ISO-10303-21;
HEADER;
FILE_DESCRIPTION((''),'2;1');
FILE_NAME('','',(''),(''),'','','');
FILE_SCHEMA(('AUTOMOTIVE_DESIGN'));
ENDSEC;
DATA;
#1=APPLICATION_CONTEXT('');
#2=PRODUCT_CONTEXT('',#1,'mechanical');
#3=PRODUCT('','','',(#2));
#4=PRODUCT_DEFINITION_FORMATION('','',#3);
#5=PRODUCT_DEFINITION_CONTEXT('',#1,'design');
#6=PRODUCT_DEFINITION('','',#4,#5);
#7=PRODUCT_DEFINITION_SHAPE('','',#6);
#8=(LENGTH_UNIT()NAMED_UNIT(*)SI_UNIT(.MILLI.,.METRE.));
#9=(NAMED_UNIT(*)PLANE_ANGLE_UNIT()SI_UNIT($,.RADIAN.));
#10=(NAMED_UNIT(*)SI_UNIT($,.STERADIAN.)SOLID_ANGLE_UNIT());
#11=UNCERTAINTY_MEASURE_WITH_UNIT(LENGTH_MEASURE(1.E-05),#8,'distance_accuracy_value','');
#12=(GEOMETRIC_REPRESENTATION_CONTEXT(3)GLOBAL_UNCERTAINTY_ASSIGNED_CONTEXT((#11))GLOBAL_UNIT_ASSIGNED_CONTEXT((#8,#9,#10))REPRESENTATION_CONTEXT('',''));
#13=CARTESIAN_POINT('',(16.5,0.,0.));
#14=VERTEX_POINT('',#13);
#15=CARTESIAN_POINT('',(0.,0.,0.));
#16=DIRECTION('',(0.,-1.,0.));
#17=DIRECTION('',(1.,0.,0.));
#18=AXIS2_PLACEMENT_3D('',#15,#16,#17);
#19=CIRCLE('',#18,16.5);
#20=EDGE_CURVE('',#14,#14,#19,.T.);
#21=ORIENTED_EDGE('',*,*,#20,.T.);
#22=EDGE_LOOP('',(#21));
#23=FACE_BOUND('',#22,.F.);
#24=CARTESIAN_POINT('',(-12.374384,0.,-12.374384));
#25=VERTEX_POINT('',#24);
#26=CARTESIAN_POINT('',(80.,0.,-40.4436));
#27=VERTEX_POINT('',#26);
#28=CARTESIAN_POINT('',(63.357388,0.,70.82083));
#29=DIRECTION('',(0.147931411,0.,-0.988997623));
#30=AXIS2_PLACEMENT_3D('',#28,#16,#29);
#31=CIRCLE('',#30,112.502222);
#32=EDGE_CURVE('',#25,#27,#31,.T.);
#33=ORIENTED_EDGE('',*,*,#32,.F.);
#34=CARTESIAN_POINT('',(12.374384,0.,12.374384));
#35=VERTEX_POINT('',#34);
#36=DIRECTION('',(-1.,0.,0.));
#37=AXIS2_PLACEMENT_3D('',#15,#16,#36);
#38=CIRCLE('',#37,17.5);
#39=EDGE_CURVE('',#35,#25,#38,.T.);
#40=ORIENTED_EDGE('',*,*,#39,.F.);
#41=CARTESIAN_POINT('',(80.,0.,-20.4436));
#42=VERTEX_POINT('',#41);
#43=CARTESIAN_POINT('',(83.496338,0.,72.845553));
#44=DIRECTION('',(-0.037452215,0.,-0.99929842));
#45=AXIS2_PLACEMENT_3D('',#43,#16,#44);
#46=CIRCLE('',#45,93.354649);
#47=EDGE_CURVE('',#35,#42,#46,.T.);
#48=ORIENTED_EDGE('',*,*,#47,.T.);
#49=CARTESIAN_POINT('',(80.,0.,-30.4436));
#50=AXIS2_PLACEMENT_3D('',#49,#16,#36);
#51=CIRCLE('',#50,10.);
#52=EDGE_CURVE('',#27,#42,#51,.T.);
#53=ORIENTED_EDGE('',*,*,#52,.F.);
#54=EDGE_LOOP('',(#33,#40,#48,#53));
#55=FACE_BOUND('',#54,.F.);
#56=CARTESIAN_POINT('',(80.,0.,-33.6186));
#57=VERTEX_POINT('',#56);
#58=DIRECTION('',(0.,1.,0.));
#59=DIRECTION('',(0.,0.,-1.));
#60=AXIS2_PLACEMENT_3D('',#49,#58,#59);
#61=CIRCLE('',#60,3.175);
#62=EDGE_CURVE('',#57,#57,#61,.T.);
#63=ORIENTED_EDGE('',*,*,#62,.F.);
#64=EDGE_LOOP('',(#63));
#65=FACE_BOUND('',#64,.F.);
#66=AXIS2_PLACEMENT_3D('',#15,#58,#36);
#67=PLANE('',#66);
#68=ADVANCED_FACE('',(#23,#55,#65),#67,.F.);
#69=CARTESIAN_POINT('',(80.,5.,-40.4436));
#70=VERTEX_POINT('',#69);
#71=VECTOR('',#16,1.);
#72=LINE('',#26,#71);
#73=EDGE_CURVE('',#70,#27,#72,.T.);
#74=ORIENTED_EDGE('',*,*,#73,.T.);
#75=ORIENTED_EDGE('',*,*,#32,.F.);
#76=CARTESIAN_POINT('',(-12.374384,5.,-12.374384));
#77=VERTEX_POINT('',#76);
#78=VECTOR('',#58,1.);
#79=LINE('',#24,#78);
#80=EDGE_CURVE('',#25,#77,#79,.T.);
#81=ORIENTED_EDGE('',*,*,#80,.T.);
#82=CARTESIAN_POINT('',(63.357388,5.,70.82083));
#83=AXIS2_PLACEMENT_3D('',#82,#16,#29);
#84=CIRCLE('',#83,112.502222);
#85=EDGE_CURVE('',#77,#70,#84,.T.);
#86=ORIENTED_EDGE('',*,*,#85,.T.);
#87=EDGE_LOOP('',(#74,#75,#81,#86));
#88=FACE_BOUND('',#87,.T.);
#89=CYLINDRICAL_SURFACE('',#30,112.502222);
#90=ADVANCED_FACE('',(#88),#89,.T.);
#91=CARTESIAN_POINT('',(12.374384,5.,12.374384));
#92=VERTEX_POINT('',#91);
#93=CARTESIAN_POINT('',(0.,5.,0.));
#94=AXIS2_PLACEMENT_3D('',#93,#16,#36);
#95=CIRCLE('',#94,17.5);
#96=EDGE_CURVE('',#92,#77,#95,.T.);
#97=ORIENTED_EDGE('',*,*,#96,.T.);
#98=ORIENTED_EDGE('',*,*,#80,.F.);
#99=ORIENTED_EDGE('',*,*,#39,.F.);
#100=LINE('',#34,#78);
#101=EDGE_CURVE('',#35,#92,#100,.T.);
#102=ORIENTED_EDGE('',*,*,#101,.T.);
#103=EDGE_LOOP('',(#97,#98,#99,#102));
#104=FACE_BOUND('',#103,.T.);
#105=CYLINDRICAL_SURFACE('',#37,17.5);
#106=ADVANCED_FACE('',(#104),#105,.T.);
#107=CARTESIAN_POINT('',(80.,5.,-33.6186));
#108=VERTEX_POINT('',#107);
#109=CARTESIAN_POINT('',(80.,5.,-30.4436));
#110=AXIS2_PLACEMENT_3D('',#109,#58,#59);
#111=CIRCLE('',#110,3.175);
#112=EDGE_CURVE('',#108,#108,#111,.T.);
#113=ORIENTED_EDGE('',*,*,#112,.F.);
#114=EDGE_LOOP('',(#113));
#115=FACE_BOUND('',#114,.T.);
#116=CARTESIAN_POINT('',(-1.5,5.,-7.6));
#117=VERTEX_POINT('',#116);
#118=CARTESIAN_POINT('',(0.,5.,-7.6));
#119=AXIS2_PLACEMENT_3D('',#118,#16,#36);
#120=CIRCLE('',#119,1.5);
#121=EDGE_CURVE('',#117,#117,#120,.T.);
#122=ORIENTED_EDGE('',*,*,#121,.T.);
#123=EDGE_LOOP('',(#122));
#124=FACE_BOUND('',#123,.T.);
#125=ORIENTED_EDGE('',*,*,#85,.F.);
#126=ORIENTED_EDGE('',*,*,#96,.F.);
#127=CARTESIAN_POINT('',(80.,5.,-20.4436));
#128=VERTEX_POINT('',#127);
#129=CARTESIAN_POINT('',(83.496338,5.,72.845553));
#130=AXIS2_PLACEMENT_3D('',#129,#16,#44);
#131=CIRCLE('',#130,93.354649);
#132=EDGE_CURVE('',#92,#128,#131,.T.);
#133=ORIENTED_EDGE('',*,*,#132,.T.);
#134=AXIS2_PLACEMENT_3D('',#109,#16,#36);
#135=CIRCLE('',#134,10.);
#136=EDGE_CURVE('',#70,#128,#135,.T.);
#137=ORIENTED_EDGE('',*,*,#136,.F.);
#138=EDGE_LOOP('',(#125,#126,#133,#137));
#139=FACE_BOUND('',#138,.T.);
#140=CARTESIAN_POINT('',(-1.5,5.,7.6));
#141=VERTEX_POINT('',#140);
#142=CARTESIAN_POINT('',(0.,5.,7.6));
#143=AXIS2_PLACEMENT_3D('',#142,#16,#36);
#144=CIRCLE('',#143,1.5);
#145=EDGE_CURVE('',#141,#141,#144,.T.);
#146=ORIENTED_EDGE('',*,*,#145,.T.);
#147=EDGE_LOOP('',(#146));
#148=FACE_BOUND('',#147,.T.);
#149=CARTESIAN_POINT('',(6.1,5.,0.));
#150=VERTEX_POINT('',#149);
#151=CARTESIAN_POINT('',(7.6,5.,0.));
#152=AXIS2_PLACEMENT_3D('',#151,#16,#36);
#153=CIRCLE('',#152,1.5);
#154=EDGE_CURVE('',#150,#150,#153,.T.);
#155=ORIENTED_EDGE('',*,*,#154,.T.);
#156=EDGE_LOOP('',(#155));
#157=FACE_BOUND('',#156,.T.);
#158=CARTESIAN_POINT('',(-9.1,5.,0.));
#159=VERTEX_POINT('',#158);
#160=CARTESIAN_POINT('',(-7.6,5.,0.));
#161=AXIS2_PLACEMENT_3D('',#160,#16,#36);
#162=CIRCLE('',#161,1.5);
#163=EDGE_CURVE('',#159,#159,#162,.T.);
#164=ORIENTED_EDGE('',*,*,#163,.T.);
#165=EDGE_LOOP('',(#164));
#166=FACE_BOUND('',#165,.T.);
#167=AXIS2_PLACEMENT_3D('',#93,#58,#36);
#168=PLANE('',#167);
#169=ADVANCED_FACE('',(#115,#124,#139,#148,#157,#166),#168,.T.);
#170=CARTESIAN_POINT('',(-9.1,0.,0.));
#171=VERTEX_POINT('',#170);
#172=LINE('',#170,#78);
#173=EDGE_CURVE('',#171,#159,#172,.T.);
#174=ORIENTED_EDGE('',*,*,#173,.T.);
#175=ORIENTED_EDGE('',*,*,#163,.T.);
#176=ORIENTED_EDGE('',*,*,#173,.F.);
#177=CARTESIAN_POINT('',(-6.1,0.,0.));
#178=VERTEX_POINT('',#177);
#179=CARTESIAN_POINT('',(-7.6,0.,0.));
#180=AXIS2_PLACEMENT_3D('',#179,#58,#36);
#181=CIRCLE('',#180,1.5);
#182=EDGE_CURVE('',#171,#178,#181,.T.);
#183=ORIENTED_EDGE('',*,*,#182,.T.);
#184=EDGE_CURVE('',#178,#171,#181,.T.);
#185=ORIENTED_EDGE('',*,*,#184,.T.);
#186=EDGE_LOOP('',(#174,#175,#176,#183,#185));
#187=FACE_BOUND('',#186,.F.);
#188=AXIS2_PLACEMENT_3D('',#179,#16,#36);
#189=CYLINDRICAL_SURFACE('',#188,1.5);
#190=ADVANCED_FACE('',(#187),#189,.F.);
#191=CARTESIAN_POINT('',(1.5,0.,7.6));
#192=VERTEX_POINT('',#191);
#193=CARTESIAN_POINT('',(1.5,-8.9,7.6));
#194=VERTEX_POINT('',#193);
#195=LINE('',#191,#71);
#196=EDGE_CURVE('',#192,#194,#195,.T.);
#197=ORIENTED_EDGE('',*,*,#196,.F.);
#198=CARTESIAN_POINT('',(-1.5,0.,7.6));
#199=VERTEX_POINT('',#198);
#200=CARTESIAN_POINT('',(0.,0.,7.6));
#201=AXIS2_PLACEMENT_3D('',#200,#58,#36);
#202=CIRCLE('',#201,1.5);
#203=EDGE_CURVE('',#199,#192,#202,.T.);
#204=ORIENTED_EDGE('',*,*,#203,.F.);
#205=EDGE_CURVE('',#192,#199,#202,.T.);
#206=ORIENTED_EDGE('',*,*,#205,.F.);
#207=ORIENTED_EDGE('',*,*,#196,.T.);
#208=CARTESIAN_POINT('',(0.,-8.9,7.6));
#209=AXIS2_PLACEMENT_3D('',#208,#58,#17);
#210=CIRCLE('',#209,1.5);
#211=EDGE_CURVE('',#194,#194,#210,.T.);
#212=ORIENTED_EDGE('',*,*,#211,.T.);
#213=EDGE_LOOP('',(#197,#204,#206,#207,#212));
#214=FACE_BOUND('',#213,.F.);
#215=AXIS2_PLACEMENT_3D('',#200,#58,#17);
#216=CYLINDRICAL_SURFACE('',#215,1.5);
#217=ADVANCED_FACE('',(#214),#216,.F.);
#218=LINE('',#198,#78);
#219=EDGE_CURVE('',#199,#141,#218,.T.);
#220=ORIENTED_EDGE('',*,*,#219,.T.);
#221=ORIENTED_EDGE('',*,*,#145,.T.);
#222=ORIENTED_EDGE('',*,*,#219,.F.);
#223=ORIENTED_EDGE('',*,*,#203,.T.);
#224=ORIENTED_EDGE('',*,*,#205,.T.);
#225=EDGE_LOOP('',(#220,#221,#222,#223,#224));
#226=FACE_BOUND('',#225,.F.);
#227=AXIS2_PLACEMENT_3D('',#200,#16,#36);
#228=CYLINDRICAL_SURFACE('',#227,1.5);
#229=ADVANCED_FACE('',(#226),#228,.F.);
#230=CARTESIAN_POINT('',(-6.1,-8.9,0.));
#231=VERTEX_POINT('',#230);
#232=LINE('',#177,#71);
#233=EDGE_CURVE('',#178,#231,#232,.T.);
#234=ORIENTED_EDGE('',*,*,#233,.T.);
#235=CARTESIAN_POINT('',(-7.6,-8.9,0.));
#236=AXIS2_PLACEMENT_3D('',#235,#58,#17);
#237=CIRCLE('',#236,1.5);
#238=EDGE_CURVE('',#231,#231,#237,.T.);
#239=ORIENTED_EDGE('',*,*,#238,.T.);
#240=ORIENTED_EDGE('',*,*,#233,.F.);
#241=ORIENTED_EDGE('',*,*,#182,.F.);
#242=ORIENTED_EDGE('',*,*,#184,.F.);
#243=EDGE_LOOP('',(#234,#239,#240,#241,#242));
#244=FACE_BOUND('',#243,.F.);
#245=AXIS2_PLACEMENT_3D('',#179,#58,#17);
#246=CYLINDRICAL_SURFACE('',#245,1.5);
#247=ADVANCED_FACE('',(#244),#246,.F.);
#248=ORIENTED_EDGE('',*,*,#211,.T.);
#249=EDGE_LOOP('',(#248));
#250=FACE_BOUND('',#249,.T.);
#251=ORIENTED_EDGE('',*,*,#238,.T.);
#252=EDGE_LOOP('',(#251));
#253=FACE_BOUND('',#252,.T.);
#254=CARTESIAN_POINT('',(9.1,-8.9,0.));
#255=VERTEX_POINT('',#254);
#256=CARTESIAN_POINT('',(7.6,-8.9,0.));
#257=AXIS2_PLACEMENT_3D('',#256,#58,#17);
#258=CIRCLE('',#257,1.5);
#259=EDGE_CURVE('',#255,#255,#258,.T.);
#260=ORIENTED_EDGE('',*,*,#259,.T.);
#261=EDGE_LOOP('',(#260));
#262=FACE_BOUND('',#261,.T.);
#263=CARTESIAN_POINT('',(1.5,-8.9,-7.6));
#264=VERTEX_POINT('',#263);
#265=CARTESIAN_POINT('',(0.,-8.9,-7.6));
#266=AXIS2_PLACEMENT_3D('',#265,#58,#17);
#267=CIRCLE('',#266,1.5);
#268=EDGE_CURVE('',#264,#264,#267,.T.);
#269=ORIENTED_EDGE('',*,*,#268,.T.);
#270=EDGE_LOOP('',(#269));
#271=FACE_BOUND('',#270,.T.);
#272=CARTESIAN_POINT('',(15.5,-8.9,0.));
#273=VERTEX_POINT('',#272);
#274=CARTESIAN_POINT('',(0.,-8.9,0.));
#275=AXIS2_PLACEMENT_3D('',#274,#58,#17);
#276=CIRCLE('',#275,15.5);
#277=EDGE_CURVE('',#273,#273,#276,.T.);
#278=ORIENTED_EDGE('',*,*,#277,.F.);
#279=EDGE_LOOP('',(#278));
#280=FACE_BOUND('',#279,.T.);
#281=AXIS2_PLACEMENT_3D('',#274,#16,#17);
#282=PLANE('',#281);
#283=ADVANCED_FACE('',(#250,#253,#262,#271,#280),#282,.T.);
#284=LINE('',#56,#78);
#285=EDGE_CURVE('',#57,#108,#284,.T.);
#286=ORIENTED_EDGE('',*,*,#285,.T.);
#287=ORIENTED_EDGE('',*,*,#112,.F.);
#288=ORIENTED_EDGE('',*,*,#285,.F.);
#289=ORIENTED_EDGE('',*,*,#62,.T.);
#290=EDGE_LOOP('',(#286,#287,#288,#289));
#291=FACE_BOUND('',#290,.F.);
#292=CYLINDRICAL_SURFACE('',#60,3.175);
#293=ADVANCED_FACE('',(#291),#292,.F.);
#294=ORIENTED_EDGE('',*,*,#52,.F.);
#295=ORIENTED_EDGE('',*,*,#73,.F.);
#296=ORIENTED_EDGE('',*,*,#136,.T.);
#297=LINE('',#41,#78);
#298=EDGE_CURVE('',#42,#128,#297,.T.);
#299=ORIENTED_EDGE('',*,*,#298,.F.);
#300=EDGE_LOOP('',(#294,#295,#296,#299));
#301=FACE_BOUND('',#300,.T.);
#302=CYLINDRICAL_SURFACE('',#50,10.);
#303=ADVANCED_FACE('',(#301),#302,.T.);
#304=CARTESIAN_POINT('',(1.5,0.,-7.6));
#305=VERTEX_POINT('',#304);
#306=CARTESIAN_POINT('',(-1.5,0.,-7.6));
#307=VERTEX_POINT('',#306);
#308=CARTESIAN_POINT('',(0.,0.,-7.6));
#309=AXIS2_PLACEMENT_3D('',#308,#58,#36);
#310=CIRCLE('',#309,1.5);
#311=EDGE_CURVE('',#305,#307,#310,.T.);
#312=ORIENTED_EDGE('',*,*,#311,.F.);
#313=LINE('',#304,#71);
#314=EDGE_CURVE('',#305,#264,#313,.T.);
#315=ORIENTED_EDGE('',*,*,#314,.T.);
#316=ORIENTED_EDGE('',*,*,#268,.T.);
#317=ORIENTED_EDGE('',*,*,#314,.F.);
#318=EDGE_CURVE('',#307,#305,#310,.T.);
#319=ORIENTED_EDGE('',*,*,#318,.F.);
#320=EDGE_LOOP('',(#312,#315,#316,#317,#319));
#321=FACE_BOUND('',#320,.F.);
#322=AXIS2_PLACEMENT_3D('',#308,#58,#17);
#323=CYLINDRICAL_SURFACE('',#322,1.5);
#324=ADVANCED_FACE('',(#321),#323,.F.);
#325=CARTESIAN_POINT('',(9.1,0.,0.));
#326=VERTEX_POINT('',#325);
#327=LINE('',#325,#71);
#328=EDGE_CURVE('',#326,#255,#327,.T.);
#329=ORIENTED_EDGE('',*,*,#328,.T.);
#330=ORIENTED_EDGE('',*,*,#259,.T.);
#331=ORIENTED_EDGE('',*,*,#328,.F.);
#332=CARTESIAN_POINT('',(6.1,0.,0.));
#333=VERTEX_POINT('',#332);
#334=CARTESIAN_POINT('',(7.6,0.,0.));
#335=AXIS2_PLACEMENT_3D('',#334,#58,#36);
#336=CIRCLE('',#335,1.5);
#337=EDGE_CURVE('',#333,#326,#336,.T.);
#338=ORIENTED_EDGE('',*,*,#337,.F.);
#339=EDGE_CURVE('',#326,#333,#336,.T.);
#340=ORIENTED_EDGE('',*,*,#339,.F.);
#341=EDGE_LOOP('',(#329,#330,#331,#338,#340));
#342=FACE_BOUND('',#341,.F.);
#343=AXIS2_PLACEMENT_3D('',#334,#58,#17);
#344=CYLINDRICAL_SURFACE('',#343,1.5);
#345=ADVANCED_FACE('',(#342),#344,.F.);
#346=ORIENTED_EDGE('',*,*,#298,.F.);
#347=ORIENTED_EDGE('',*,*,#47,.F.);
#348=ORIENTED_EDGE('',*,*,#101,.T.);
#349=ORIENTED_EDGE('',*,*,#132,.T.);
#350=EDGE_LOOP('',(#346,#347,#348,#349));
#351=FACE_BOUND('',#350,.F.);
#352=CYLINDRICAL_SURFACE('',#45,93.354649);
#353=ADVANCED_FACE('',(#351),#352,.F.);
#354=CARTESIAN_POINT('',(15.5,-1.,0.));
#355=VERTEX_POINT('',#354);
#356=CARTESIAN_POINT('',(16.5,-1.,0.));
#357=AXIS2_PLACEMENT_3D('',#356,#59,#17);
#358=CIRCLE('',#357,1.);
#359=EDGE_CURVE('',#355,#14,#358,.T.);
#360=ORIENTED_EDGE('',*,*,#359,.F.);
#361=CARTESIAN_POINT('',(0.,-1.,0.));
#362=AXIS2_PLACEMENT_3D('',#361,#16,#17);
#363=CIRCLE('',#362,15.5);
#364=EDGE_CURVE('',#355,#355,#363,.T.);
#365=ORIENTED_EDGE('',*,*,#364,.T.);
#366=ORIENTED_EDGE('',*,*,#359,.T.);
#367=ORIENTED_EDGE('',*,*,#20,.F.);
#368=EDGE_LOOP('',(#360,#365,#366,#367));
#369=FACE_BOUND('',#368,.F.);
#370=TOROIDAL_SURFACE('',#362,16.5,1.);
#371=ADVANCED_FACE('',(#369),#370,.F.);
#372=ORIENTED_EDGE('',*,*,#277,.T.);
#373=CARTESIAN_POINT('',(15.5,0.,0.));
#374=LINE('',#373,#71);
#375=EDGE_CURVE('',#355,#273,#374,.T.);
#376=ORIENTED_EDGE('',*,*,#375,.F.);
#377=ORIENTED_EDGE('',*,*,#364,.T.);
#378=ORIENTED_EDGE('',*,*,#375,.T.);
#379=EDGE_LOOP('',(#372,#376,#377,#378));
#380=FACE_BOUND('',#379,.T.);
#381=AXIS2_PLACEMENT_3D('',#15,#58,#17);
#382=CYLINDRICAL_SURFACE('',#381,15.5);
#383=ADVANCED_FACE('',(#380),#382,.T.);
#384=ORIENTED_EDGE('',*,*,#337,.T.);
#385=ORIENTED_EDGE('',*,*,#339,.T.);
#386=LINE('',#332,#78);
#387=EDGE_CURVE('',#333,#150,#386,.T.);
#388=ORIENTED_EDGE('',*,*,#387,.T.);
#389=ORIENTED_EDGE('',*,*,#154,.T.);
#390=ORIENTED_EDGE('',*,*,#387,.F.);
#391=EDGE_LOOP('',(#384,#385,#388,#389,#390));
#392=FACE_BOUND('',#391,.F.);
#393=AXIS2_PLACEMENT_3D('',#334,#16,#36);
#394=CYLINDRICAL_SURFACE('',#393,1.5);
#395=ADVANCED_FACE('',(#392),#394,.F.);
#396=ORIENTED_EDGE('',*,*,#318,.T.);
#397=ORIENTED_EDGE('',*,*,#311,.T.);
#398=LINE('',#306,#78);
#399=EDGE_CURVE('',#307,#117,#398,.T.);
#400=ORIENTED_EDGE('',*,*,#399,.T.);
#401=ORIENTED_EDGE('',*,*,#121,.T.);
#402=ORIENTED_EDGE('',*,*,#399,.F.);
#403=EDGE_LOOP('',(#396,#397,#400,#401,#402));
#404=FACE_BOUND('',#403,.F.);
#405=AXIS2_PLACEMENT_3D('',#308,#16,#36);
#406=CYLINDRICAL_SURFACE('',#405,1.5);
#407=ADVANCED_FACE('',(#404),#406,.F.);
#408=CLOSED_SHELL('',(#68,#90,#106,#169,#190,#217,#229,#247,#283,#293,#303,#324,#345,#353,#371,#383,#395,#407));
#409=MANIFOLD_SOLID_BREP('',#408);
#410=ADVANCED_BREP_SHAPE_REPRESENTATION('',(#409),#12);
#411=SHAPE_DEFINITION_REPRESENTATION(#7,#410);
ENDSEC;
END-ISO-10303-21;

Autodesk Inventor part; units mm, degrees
ref_plane "YZ Plane" through (0, 0, 0) normal (1, 0, 0) x (0, 1, 0)
ref_plane "XZ Plane" through (0, 0, 0) normal (0, 1, 0) x (-1, 0, 0)
ref_plane "XY Plane" through (0, 0, 0) normal (0, 0, 1) x (1, 0, 0)
sketch "Cara" plane through (0, 0, 0) normal (0, 0, 1) x (1, 0, 0)
  line L0 (-22.1935, -24.9393) -> (-15.1747, -17.9205)
  arc A0 (-12.474, -17.8034) -> (-15.1747, -17.9205) centre (-13.7605, -19.3347) ccw
  arc A1 (-12.474, -17.8034) -> (-6.107, -21.4794) centre (1.0981, -1.6477) ccw
  arc A2 (-4.8581, -23.8768) -> (-6.107, -21.4794) centre (-6.79, -23.3592) ccw
  line L1 (-4.8581, -23.8768) -> (-7.4272, -33.4646)
  arc A3 (-9.9928, -34.8439) -> (-7.4272, -33.4646) centre (-9.359, -32.947) ccw
  arc A4 (-22.1052, -27.8509) -> (-9.9928, -34.8439) centre (1.0981, -1.6477) ccw
  arc A5 (-22.1935, -24.9393) -> (-22.1052, -27.8509) centre (-20.7793, -26.3535) ccw
  line L2 (9.6235, -33.4646) -> (7.0544, -23.8768)
  arc A6 (8.3033, -21.4794) -> (7.0544, -23.8768) centre (8.9863, -23.3592) ccw
  arc A7 (8.3033, -21.4794) -> (14.6703, -17.8034) centre (1.0981, -1.6477) ccw
  arc A8 (17.371, -17.9205) -> (14.6703, -17.8034) centre (15.9568, -19.3347) ccw
  line L3 (17.371, -17.9205) -> (24.3898, -24.9393)
  arc A9 (24.3015, -27.8509) -> (24.3898, -24.9393) centre (22.9756, -26.3535) ccw
  arc A10 (12.1891, -34.8439) -> (24.3015, -27.8509) centre (1.0981, -1.6477) ccw
  arc A11 (9.6235, -33.4646) -> (12.1891, -34.8439) centre (11.5553, -32.947) ccw
  line L4 (32.9151, -10.173) -> (23.3272, -7.604)
  arc A12 (21.8755, -5.3237) -> (23.3272, -7.604) centre (23.8449, -5.6721) ccw
  arc A13 (21.8755, -5.3237) -> (21.8755, 2.0283) centre (1.0981, -1.6477) ccw
  arc A14 (23.3272, 4.3086) -> (21.8755, 2.0283) centre (23.8449, 2.3767) ccw
  line L5 (23.3272, 4.3086) -> (32.9151, 6.8776)
  arc A15 (35.3924, 5.3454) -> (32.9151, 6.8776) centre (33.4327, 4.9458) ccw
  arc A16 (35.3924, -8.6408) -> (35.3924, 5.3454) centre (1.0981, -1.6477) ccw
  arc A17 (32.9151, -10.173) -> (35.3924, -8.6408) centre (33.4327, -8.2412) ccw
  line L6 (24.3898, 21.6439) -> (17.371, 14.6251)
  arc A18 (14.6703, 14.508) -> (17.371, 14.6251) centre (15.9568, 16.0394) ccw
  arc A19 (14.6703, 14.508) -> (8.3033, 18.184) centre (1.0981, -1.6477) ccw
  arc A20 (7.0544, 20.5814) -> (8.3033, 18.184) centre (8.9863, 20.0638) ccw
  line L7 (7.0544, 20.5814) -> (9.6235, 30.1693)
  arc A21 (12.1891, 31.5486) -> (9.6235, 30.1693) centre (11.5553, 29.6516) ccw
  arc A22 (24.3015, 24.5555) -> (12.1891, 31.5486) centre (1.0981, -1.6477) ccw
  arc A23 (24.3898, 21.6439) -> (24.3015, 24.5555) centre (22.9756, 23.0582) ccw
  line L8 (-7.4272, 30.1693) -> (-4.8581, 20.5814)
  arc A24 (-6.107, 18.184) -> (-4.8581, 20.5814) centre (-6.79, 20.0638) ccw
  arc A25 (-6.107, 18.184) -> (-12.474, 14.508) centre (1.0981, -1.6477) ccw
  arc A26 (-15.1747, 14.6251) -> (-12.474, 14.508) centre (-13.7605, 16.0394) ccw
  line L9 (-15.1747, 14.6251) -> (-22.1935, 21.6439)
  arc A27 (-22.1052, 24.5555) -> (-22.1935, 21.6439) centre (-20.7793, 23.0582) ccw
  arc A28 (-9.9928, 31.5486) -> (-22.1052, 24.5555) centre (1.0981, -1.6477) ccw
  arc A29 (-7.4272, 30.1693) -> (-9.9928, 31.5486) centre (-9.359, 29.6516) ccw
  line L10 (-30.7188, 6.8776) -> (-21.131, 4.3086)
  arc A30 (-19.6792, 2.0283) -> (-21.131, 4.3086) centre (-21.6486, 2.3767) ccw
  arc A31 (-19.6792, 2.0283) -> (-19.6792, -5.3237) centre (1.0981, -1.6477) ccw
  arc A32 (-21.131, -7.604) -> (-19.6792, -5.3237) centre (-21.6486, -5.6721) ccw
  line L11 (-21.131, -7.604) -> (-30.7188, -10.173)
  arc A33 (-33.1961, -8.6408) -> (-30.7188, -10.173) centre (-31.2365, -8.2412) ccw
  arc A34 (-33.1961, 5.3454) -> (-33.1961, -8.6408) centre (1.0981, -1.6477) ccw
  arc A35 (-30.7188, 6.8776) -> (-33.1961, 5.3454) centre (-31.2365, 4.9458) ccw
  circle A36 centre (-37.4568, -19.3542) radius 1.5875
  circle A37 centre (39.653, 16.0588) radius 1.5875
  circle A38 centre (-16.6083, 36.9072) radius 1.5875
  circle A39 centre (18.8046, -40.2026) radius 1.5875
  circle A40 centre (1.0981, -1.6477) radius 15.5
  arc A41 (13.186, 39.6183) -> (16.9444, 39.4394) centre (15.4349, 47.2957) ccw
  arc A42 (13.186, 39.6183) -> (-10.9897, 39.6183) centre (1.0981, -1.6477) ccw
  arc A43 (-15.0916, 39.5133) -> (-10.9897, 39.6183) centre (-13.2386, 47.2957) ccw
  arc A44 (-15.0916, 39.5133) -> (-19.5734, 37.455) centre (-16.0181, 35.6221) ccw
  arc A45 (-22.3261, 34.412) -> (-19.5734, 37.455) centre (-26.6841, 41.1208) ccw
  arc A46 (-22.3261, 34.412) -> (-34.8255, 21.9848) centre (1.0981, -1.6477) ccw
  arc A47 (-37.5746, 19.4158) -> (-34.8255, 21.9848) centre (-41.5089, 26.3816) ccw
  arc A48 (-39.989, 14.1986) -> (-37.5746, 19.4158) centre (-37.4054, 16.1703) ccw
  arc A49 (-40.1679, 10.4402) -> (-39.989, 14.1986) centre (-47.8453, 12.6891) ccw
  arc A50 (-40.1679, 10.4402) -> (-40.2027, -13.6161) centre (1.0981, -1.6477) ccw
  arc A51 (-40.1338, -17.8165) -> (-40.2027, -13.6161) centre (-47.8865, -15.8428) ccw
  arc A52 (-40.1338, -17.8165) -> (-38.0349, -22.3868) centre (-36.2575, -18.8034) ccw
  arc A53 (-34.8937, -25.1762) -> (-38.0349, -22.3868) centre (-41.5898, -29.5536) ccw
  arc A54 (-34.8937, -25.1762) -> (-22.5344, -37.5713) centre (1.0981, -1.6477) ccw
  arc A55 (-19.9654, -40.3204) -> (-22.5344, -37.5713) centre (-26.9311, -44.2547) ccw
  arc A56 (-14.7481, -42.7348) -> (-19.9654, -40.3204) centre (-16.7198, -40.1512) ccw
  arc A57 (-10.9897, -42.9137) -> (-14.7481, -42.7348) centre (-13.2386, -50.5911) ccw
  arc A58 (-10.9897, -42.9137) -> (13.0666, -42.9485) centre (1.0981, -1.6477) ccw
  arc A59 (17.2235, -42.8687) -> (13.0666, -42.9485) centre (15.2932, -50.6324) ccw
  arc A60 (17.2235, -42.8687) -> (21.7574, -40.7935) centre (18.1887, -38.9869) ccw
  arc A61 (24.5347, -37.6994) -> (21.7574, -40.7935) centre (28.895, -44.4067) ccw
  arc A62 (24.5347, -37.6994) -> (37.0217, -25.2802) centre (1.0981, -1.6477) ccw
  arc A63 (39.7709, -22.7112) -> (37.0217, -25.2802) centre (43.7052, -29.6769) ccw
  arc A64 (42.1093, -17.3982) -> (39.7709, -22.7112) centre (39.6017, -19.4656) ccw
  arc A65 (42.3332, -13.8408) -> (42.1093, -17.3982) centre (50.0048, -16.1093) ccw
  arc A66 (42.3332, -13.8408) -> (42.3989, 10.3207) centre (1.0981, -1.6477) ccw
  arc A67 (42.3301, 14.5211) -> (42.3989, 10.3207) centre (50.0828, 12.5474) ccw
  arc A68 (42.3301, 14.5211) -> (40.2312, 19.0914) centre (38.4538, 15.508) ccw
  arc A69 (37.09, 21.8808) -> (40.2312, 19.0914) centre (43.7861, 26.2582) ccw
  arc A70 (37.09, 21.8808) -> (24.7307, 34.2759) centre (1.0981, -1.6477) ccw
  arc A71 (22.1617, 37.0251) -> (24.7307, 34.2759) centre (29.1274, 40.9594) ccw
  arc A72 (16.9444, 39.4394) -> (22.1617, 37.0251) centre (18.9161, 36.8558) ccw
  arc A73 (-38.8583, 20.9988) -> (-42.0265, 14.1525) centre (-36.2077, 15.616) ccw
  spline S0 degree 3 poles (-40.2504, 14.5992) (-40.3671, 14.8104) (-40.4601, 15.0344) (-40.6458, 15.6766) (-40.6826, 16.1053) (-40.5958, 16.8869) (-40.4968, 17.2357) (-40.1864, 17.8912) (-39.9757, 18.1925) (-39.4148, 18.7612) (-39.0515, 19.0059) (-38.4565, 19.2528) (-38.255, 19.3143) (-38.0493, 19.3558) knots 0 0 0 0 0.118944 0.118944 0.328096 0.328096 0.504735 0.504735 0.683825 0.683825 0.89662 0.89662 1 1 1 1
  line L12 (-38.8583, 20.9988) -> (-38.0493, 19.3558)
  arc A74 (-38.8583, 20.9988) -> (-42.0265, 14.1525) centre (-36.2077, 15.616) ccw
  line L13 (-40.2504, 14.5992) -> (-42.0265, 14.1525)
  line L14 (-38.5582, 21.1573) -> (-37.5746, 19.4158)
  arc A75 (-37.5746, 19.4158) -> (-34.8255, 21.9848) centre (-41.5089, 26.3816) ccw
  line L15 (-36.4963, 23.084) -> (-34.8255, 21.9848)
  arc A76 (-38.5582, 21.1573) -> (-36.4963, 23.084) centre (-41.5089, 26.3816) ccw
  spline S1 degree 3 poles (-38.0493, 19.3558) (-37.9271, 19.3805) (-37.8093, 19.397) (-37.6564, 19.4108) (-37.6155, 19.4137) (-37.5746, 19.4158) knots 0 0 0 0 0.731153 0.731153 1 1 1 1
  line L16 (-38.5582, 21.1573) -> (-37.5746, 19.4158)
  arc A77 (-38.8583, 20.9988) -> (-38.5582, 21.1573) centre (-41.5089, 26.3816) ccw
  line L17 (-38.8583, 20.9988) -> (-38.0493, 19.3558)
  spline S2 degree 3 poles (-39.989, 14.1986) (-40.081, 14.3191) (-40.1695, 14.4526) (-40.2504, 14.5992) knots 0 0 0 0 1 1 1 1
  line L18 (-40.2504, 14.5992) -> (-42.0265, 14.1525)
  arc A78 (-41.953, 13.8212) -> (-42.0265, 14.1525) centre (-47.8453, 12.6891) ccw
  line L19 (-39.989, 14.1986) -> (-41.953, 13.8212)
  line L20 (-39.989, 14.1986) -> (-41.953, 13.8212)
  arc A79 (-42.0872, 11.0024) -> (-41.953, 13.8212) centre (-47.8453, 12.6891) ccw
  line L21 (-42.0872, 11.0024) -> (-40.1679, 10.4402)
  arc A80 (-40.1679, 10.4402) -> (-39.989, 14.1986) centre (-47.8453, 12.6891) ccw
  arc A81 (-42.0872, 11.0024) -> (-42.1236, -14.1728) centre (1.0981, -1.6477) ccw
  line L22 (-36.4963, 23.084) -> (-34.8255, 21.9848)
  arc A82 (-22.3261, 34.412) -> (-34.8255, 21.9848) centre (1.0981, -1.6477) ccw
  line L23 (-23.4156, 36.0892) -> (-22.3261, 34.412)
  arc A83 (-23.4156, 36.0892) -> (-36.4963, 23.084) centre (1.0981, -1.6477) ccw
  line L24 (-23.4156, 36.0892) -> (-22.3261, 34.412)
  arc A84 (-22.3261, 34.412) -> (-19.5734, 37.455) centre (-26.6841, 41.1208) ccw
  line L25 (-21.3511, 38.3714) -> (-19.5734, 37.455)
  arc A85 (-23.4156, 36.0892) -> (-21.3511, 38.3714) centre (-26.6841, 41.1208) ccw
  line L26 (-21.3511, 38.3714) -> (-19.5734, 37.455)
  arc A86 (-15.0916, 39.5133) -> (-19.5734, 37.455) centre (-16.0181, 35.6221) ccw
  line L27 (-14.6284, 41.4589) -> (-15.0916, 39.5133)
  arc A87 (-14.6284, 41.4589) -> (-21.3511, 38.3714) centre (-16.0181, 35.6221) ccw
  line L28 (-14.6284, 41.4589) -> (-15.0916, 39.5133)
  arc A88 (-15.0916, 39.5133) -> (-10.9897, 39.6183) centre (-13.2386, 47.2957) ccw
  line L29 (-11.5519, 41.5377) -> (-10.9897, 39.6183)
  arc A89 (-14.6284, 41.4589) -> (-11.5519, 41.5377) centre (-13.2386, 47.2957) ccw
  line L30 (-11.5519, 41.5377) -> (-10.9897, 39.6183)
  arc A90 (13.186, 39.6183) -> (-10.9897, 39.6183) centre (1.0981, -1.6477) ccw
  line L31 (13.7482, 41.5377) -> (13.186, 39.6183)
  arc A91 (13.7482, 41.5377) -> (-11.5519, 41.5377) centre (1.0981, -1.6477) ccw
  line L32 (16.9444, 39.4394) -> (16.567, 41.4035)
  arc A92 (13.7482, 41.5377) -> (16.567, 41.4035) centre (15.4349, 47.2957) ccw
  line L33 (13.7482, 41.5377) -> (13.186, 39.6183)
  arc A93 (13.186, 39.6183) -> (16.9444, 39.4394) centre (15.4349, 47.2957) ccw
  spline S3 degree 3 poles (16.9444, 39.4394) (17.0649, 39.5314) (17.1985, 39.6199) (17.3451, 39.7009) knots 0 0 0 0 1 1 1 1
  line L34 (17.3451, 39.7009) -> (16.8984, 41.4769)
  arc A94 (16.567, 41.4035) -> (16.8984, 41.4769) centre (15.4349, 47.2957) ccw
  line L35 (16.9444, 39.4394) -> (16.567, 41.4035)
  spline S4 degree 3 poles (17.3451, 39.7009) (17.5563, 39.8175) (17.7803, 39.9105) (18.4224, 40.0962) (18.8512, 40.133) (19.6327, 40.0462) (19.9815, 39.9473) (20.6371, 39.6368) (20.9383, 39.4261) (21.507, 38.8652) (21.7517, 38.502) (21.9986, 37.907) (22.0601, 37.7054) (22.1017, 37.4997) knots 0 0 0 0 0.118944 0.118944 0.328096 0.328096 0.504735 0.504735 0.683825 0.683825 0.89662 0.89662 1 1 1 1
  line L36 (23.7446, 38.3088) -> (22.1017, 37.4997)
  arc A95 (23.7446, 38.3088) -> (16.8984, 41.4769) centre (18.3618, 35.6581) ccw
  line L37 (17.3451, 39.7009) -> (16.8984, 41.4769)
  line L38 (37.09, 21.8808) -> (38.764, 22.9751)
  arc A96 (38.764, 22.9751) -> (25.8298, 35.9468) centre (1.0981, -1.6477) ccw
  line L39 (25.8298, 35.9468) -> (24.7307, 34.2759)
  arc A97 (37.09, 21.8808) -> (24.7307, 34.2759) centre (1.0981, -1.6477) ccw
  line L40 (23.9031, 38.0086) -> (22.1617, 37.0251)
  arc A98 (22.1617, 37.0251) -> (24.7307, 34.2759) centre (29.1274, 40.9594) ccw
  line L41 (25.8298, 35.9468) -> (24.7307, 34.2759)
  arc A99 (23.9031, 38.0086) -> (25.8298, 35.9468) centre (29.1274, 40.9594) ccw
  spline S5 degree 3 poles (22.1017, 37.4997) (22.1264, 37.3775) (22.1428, 37.2598) (22.1566, 37.1069) (22.1595, 37.0659) (22.1617, 37.0251) knots 0 0 0 0 0.731153 0.731153 1 1 1 1
  line L42 (23.9031, 38.0086) -> (22.1617, 37.0251)
  arc A100 (23.7446, 38.3088) -> (23.9031, 38.0086) centre (29.1274, 40.9594) ccw
  line L43 (23.7446, 38.3088) -> (22.1017, 37.4997)
  line L44 (37.09, 21.8808) -> (38.764, 22.9751)
  arc A101 (37.09, 21.8808) -> (40.2312, 19.0914) centre (43.7861, 26.2582) ccw
  line L45 (41.1199, 20.8831) -> (40.2312, 19.0914)
  arc A102 (38.764, 22.9751) -> (41.1199, 20.8831) centre (43.7861, 26.2582) ccw
  line L46 (41.1199, 20.8831) -> (40.2312, 19.0914)
  arc A103 (42.3301, 14.5211) -> (40.2312, 19.0914) centre (38.4538, 15.508) ccw
  line L47 (44.2683, 14.0277) -> (42.3301, 14.5211)
  arc A104 (44.2683, 14.0277) -> (41.1199, 20.8831) centre (38.4538, 15.508) ccw
  line L48 (44.2683, 14.0277) -> (42.3301, 14.5211)
  arc A105 (42.3301, 14.5211) -> (42.3989, 10.3207) centre (50.0828, 12.5474) ccw
  line L49 (44.3199, 10.8774) -> (42.3989, 10.3207)
  arc A106 (44.2683, 14.0277) -> (44.3199, 10.8774) centre (50.0828, 12.5474) ccw
  line L50 (44.3199, 10.8774) -> (42.3989, 10.3207)
  arc A107 (42.3332, -13.8408) -> (42.3989, 10.3207) centre (1.0981, -1.6477) ccw
  line L51 (44.2511, -14.4079) -> (42.3332, -13.8408)
  arc A108 (44.2511, -14.4079) -> (44.3199, 10.8774) centre (1.0981, -1.6477) ccw
  spline S6 degree 3 poles (42.4708, -17.939) (42.66, -18.2947) (42.7816, -18.6826) (42.8764, -19.4825) (42.8492, -19.8873) (42.6667, -20.5952) (42.5369, -20.899) (42.1389, -21.5409) (41.845, -21.8556) (41.1886, -22.3275) (40.8415, -22.494) (40.3834, -22.6216) (40.2925, -22.6427) (40.2009, -22.6599) knots 0 0 0 0 0.198107 0.198107 0.395669 0.395669 0.556952 0.556952 0.766408 0.766408 0.954091 0.954091 1 1 1 1
  line L52 (41.0245, -24.3091) -> (40.2009, -22.6599)
  arc A109 (41.0245, -24.3091) -> (44.1743, -17.5253) centre (38.3438, -18.9413) ccw
  line L53 (42.4708, -17.939) -> (44.1743, -17.5253)
  line L54 (42.1093, -17.3982) -> (44.0832, -17.076)
  arc A110 (44.2511, -14.4079) -> (44.0832, -17.076) centre (50.0048, -16.1093) ccw
  line L55 (44.2511, -14.4079) -> (42.3332, -13.8408)
  arc A111 (42.3332, -13.8408) -> (42.1093, -17.3982) centre (50.0048, -16.1093) ccw
  spline S7 degree 3 poles (42.1093, -17.3982) (42.1251, -17.4173) (42.1406, -17.4367) (42.2692, -17.6002) (42.376, -17.7609) (42.4708, -17.939) knots 0 0 0 0 0.119683 0.119683 1 1 1 1
  line L56 (42.4708, -17.939) -> (44.1743, -17.5253)
  arc A112 (44.0832, -17.076) -> (44.1743, -17.5253) centre (50.0048, -16.1093) ccw
  line L57 (42.1093, -17.3982) -> (44.0832, -17.076)
  spline S8 degree 3 poles (40.2009, -22.6599) (40.0946, -22.6799) (39.9919, -22.6936) (39.8527, -22.7062) (39.8117, -22.7091) (39.7709, -22.7112) knots 0 0 0 0 0.704713 0.704713 1 1 1 1
  line L58 (40.7545, -24.4527) -> (39.7709, -22.7112)
  arc A113 (41.0245, -24.3091) -> (40.7545, -24.4527) centre (43.7052, -29.6769) ccw
  line L59 (41.0245, -24.3091) -> (40.2009, -22.6599)
  line L60 (40.7545, -24.4527) -> (39.7709, -22.7112)
  arc A114 (39.7709, -22.7112) -> (37.0217, -25.2802) centre (43.7052, -29.6769) ccw
  line L61 (38.6926, -26.3794) -> (37.0217, -25.2802)
  arc A115 (40.7545, -24.4527) -> (38.6926, -26.3794) centre (43.7052, -29.6769) ccw
  line L62 (38.6926, -26.3794) -> (37.0217, -25.2802)
  arc A116 (24.5347, -37.6994) -> (37.0217, -25.2802) centre (1.0981, -1.6477) ccw
  line L63 (25.6248, -39.3763) -> (24.5347, -37.6994)
  arc A117 (25.6248, -39.3763) -> (38.6926, -26.3794) centre (1.0981, -1.6477) ccw
  line L64 (25.6248, -39.3763) -> (24.5347, -37.6994)
  arc A118 (24.5347, -37.6994) -> (21.7574, -40.7935) centre (28.895, -44.4067) ccw
  line L65 (23.5418, -41.6968) -> (21.7574, -40.7935)
  arc A119 (25.6248, -39.3763) -> (23.5418, -41.6968) centre (28.895, -44.4067) ccw
  line L66 (23.5418, -41.6968) -> (21.7574, -40.7935)
  arc A120 (17.2235, -42.8687) -> (21.7574, -40.7935) centre (18.1887, -38.9869) ccw
  line L67 (16.7409, -44.8096) -> (17.2235, -42.8687)
  arc A121 (16.7409, -44.8096) -> (23.5418, -41.6968) centre (18.1887, -38.9869) ccw
  line L68 (16.7409, -44.8096) -> (17.2235, -42.8687)
  arc A122 (17.2235, -42.8687) -> (13.0666, -42.9485) centre (15.2932, -50.6324) ccw
  line L69 (13.6232, -44.8695) -> (13.0666, -42.9485)
  arc A123 (16.7409, -44.8096) -> (13.6232, -44.8695) centre (15.2932, -50.6324) ccw
  arc A124 (-10.9897, -42.9137) -> (13.0666, -42.9485) centre (1.0981, -1.6477) ccw
  line L70 (13.6232, -44.8695) -> (13.0666, -42.9485)
  arc A125 (-10.9897, -42.9137) -> (13.0666, -42.9485) centre (1.0981, -1.6477) ccw
  line L71 (-11.5519, -44.8331) -> (-10.9897, -42.9137)
  arc A126 (-11.5519, -44.8331) -> (13.6232, -44.8695) centre (1.0981, -1.6477) ccw
  line L72 (-14.7481, -42.7348) -> (-14.3707, -44.6989)
  arc A127 (-11.5519, -44.8331) -> (-14.3707, -44.6989) centre (-13.2386, -50.5911) ccw
  line L73 (-11.5519, -44.8331) -> (-10.9897, -42.9137)
  arc A128 (-10.9897, -42.9137) -> (-14.7481, -42.7348) centre (-13.2386, -50.5911) ccw
  spline S9 degree 3 poles (-15.1488, -42.9963) (-15.36, -43.1129) (-15.584, -43.2059) (-16.2261, -43.3916) (-16.6549, -43.4284) (-17.4365, -43.3416) (-17.7852, -43.2427) (-18.4408, -42.9322) (-18.742, -42.7215) (-19.3107, -42.1606) (-19.5554, -41.7973) (-19.8023, -41.2024) (-19.8638, -41.0008) (-19.9054, -40.7951) knots 0 0 0 0 0.118944 0.118944 0.328096 0.328096 0.504735 0.504735 0.683825 0.683825 0.89662 0.89662 1 1 1 1
  line L74 (-21.5483, -41.6041) -> (-19.9054, -40.7951)
  arc A129 (-21.5483, -41.6041) -> (-14.7021, -44.7723) centre (-16.1656, -38.9535) ccw
  line L75 (-15.1488, -42.9963) -> (-14.7021, -44.7723)
  spline S10 degree 3 poles (-14.7481, -42.7348) (-14.8686, -42.8268) (-15.0022, -42.9153) (-15.1488, -42.9963) knots 0 0 0 0 1 1 1 1
  line L76 (-15.1488, -42.9963) -> (-14.7021, -44.7723)
  arc A130 (-14.3707, -44.6989) -> (-14.7021, -44.7723) centre (-13.2386, -50.5911) ccw
  line L77 (-14.7481, -42.7348) -> (-14.3707, -44.6989)
  spline S11 degree 3 poles (-19.9054, -40.7951) (-19.9301, -40.6729) (-19.9466, -40.5552) (-19.9604, -40.4023) (-19.9633, -40.3613) (-19.9654, -40.3204) knots 0 0 0 0 0.731153 0.731153 1 1 1 1
  line L78 (-21.7068, -41.304) -> (-19.9654, -40.3204)
  arc A131 (-21.5483, -41.6041) -> (-21.7068, -41.304) centre (-26.9311, -44.2547) ccw
  line L79 (-21.5483, -41.6041) -> (-19.9054, -40.7951)
  circle A132 centre (-16.7198, -40.1512) radius 3.25
  circle A133 centre (-16.7198, -40.1512) radius 1.5875
  circle A134 centre (39.6017, -19.4656) radius 3.25
  circle A135 centre (39.6017, -19.4656) radius 1.5875
  circle A136 centre (18.9161, 36.8558) radius 3.25
  circle A137 centre (18.9161, 36.8558) radius 1.5875
  circle A138 centre (-37.4054, 16.1703) radius 3.25
  circle A139 centre (-37.4054, 16.1703) radius 1.5875
  line L80 (-42.072, -17.3231) -> (-40.1338, -17.8165)
  arc A140 (-40.1338, -17.8165) -> (-40.2027, -13.6161) centre (-47.8865, -15.8428) ccw
  line L81 (-42.1236, -14.1728) -> (-40.2027, -13.6161)
  arc A141 (-42.072, -17.3231) -> (-42.1236, -14.1728) centre (-47.8865, -15.8428) ccw
  line L82 (-38.9237, -24.1785) -> (-38.0349, -22.3868)
  arc A142 (-40.1338, -17.8165) -> (-38.0349, -22.3868) centre (-36.2575, -18.8034) ccw
  line L83 (-42.072, -17.3231) -> (-40.1338, -17.8165)
  arc A143 (-42.072, -17.3231) -> (-38.9237, -24.1785) centre (-36.2575, -18.8034) ccw
  line L84 (-36.5677, -26.2705) -> (-34.8937, -25.1762)
  arc A144 (-34.8937, -25.1762) -> (-38.0349, -22.3868) centre (-41.5898, -29.5536) ccw
  line L85 (-38.9237, -24.1785) -> (-38.0349, -22.3868)
  arc A145 (-36.5677, -26.2705) -> (-38.9237, -24.1785) centre (-41.5898, -29.5536) ccw
  line L86 (-23.6336, -39.2421) -> (-22.5344, -37.5713)
  arc A146 (-34.8937, -25.1762) -> (-22.5344, -37.5713) centre (1.0981, -1.6477) ccw
  line L87 (-36.5677, -26.2705) -> (-34.8937, -25.1762)
  arc A147 (-36.5677, -26.2705) -> (-23.6336, -39.2421) centre (1.0981, -1.6477) ccw
  line L88 (-21.7068, -41.304) -> (-19.9654, -40.3204)
  arc A148 (-19.9654, -40.3204) -> (-22.5344, -37.5713) centre (-26.9311, -44.2547) ccw
  line L89 (-23.6336, -39.2421) -> (-22.5344, -37.5713)
  arc A149 (-21.7068, -41.304) -> (-23.6336, -39.2421) centre (-26.9311, -44.2547) ccw
  point P0 (1.3022, -1.7009)
  dimension "d1" = 30
  dimension "d2" = 40
  dimension "d3" = 70
  dimension "d4" = 90
  dimension "d5" = 65
  dimension "d6" = 95
  dimension "d7" = 100
  dimension "d8" = 72
  dimension "d9" = 17
  dimension "d10" = 110
  dimension "d11" = 4
sketch "Sketch1" plane through (0, 0, 0) normal (0, 1, 0) x (-1, 0, 0)
  line L0 (124.1031, 264.7872) -> (124.1031, -182.5054) construction
  line L1 (124.1031, -182.5054) -> (-344.0995, -182.5054) construction
  line L2 (-344.0995, -182.5054) -> (-344.0995, 264.7872) construction
  line L3 (-344.0995, 264.7872) -> (124.1031, 264.7872) construction
  circle A0 centre (0, 0) radius 50
  circle A1 centre (0, 0) radius 17.5
  line L4 (0, 0) -> (-80, -30.4436)
  line L5 (0, 0) -> (0, -17.5)
  line L6 (0, 0) -> (-17.5, 0)
  circle A2 centre (-80, -30.4436) radius 10
  line L7 (0, 0) -> (12.3744, -12.3744)
  line L8 (-80, -30.4436) -> (-80, -40.4436)
  line L9 (-80, -30.4436) -> (-72.9289, -37.5146)
  arc A3 (-80, -40.4436) -> (12.3744, -12.3744) centre (-63.3574, 70.821) ccw
  line L10 (-80, -30.4436) -> (-80, -20.4436)
  line L11 (0, 0) -> (-12.3744, 12.3744)
  arc A4 (-80, -20.4436) -> (-12.3744, 12.3744) centre (-83.4964, 72.8458) ccw
  circle A5 centre (0, 0) radius 7.6
  circle A6 centre (7.6, 0) radius 1.5
  circle A7 centre (0, 7.6) radius 1.5
  circle A8 centre (-7.6, 0) radius 1.5
  circle A9 centre (0, -7.6) radius 1.5
  circle A10 centre (-80, -30.4436) radius 1.5
  dimension "d68" = 15.2
  dimension "d44" = 100
  dimension "d55" = 35
  dimension "d56" = 80
  dimension "d65" = 20
  dimension "d66" = 45
  dimension "d67" = 45
  dimension "d69" = 3
  dimension "d72" = 360
  dimension "d80" = 3
extrude "Extrusion1" add sketch "Sketch1" along normal blind 5 contours A4 A1 L4 A0 | A0 L4 A2 A4 | A3 A2 L4 A0 | A0 L4 A1 A3 | L10 A10 L8 A2 | A2 L4 A10 L10 | A4 L11 A5 A8 L6 A1 | L8 A10 L9 A2 | A1 L5 A9 A5 L7 A3 | L4 A5 A9 L5 A1 | A1 L6 A8 A5 L4 | A2 L9 A10 L4 | A10 L4 L10 | L10 L8 A10 | A1 L7 A5 A6 A7 L11 | L8 L9 A10 | A5 A8 L6 L4 | L4 L5 A9 A5 | A10 L9 L4 | A5 A7 A6 L7 L11 | L11 L6 A8 A5 | A5 A9 L5 L7
sketch "Sketch2" plane through (0, 0, 0) normal (0, -1, 0) x (1, 0, 0)
  circle A0 centre (0, 0) radius 15.5
  circle A1 centre (-7.6, 0) radius 1.5 projected
  circle A2 centre (0, -7.6) radius 1.5 projected
  circle A3 centre (7.6, 0) radius 1.5 projected
  circle A4 centre (0, 7.6) radius 1.5 projected
  dimension "d77" = 31
extrude "Extrusion2" add sketch "Sketch2" along normal blind 4.9
hole "Hole1" at (80, 0, -30.4436) direction (0, 1, 0) diameter 6.35 end through all
fillet "Fillet1" radius 1 1 edges at (-15.5, 0, 0)
move faces "Move1" translate (0, -4, 0) faces at (6.8404, -4.9, -6.4558)
properties part number "Link1V1"
